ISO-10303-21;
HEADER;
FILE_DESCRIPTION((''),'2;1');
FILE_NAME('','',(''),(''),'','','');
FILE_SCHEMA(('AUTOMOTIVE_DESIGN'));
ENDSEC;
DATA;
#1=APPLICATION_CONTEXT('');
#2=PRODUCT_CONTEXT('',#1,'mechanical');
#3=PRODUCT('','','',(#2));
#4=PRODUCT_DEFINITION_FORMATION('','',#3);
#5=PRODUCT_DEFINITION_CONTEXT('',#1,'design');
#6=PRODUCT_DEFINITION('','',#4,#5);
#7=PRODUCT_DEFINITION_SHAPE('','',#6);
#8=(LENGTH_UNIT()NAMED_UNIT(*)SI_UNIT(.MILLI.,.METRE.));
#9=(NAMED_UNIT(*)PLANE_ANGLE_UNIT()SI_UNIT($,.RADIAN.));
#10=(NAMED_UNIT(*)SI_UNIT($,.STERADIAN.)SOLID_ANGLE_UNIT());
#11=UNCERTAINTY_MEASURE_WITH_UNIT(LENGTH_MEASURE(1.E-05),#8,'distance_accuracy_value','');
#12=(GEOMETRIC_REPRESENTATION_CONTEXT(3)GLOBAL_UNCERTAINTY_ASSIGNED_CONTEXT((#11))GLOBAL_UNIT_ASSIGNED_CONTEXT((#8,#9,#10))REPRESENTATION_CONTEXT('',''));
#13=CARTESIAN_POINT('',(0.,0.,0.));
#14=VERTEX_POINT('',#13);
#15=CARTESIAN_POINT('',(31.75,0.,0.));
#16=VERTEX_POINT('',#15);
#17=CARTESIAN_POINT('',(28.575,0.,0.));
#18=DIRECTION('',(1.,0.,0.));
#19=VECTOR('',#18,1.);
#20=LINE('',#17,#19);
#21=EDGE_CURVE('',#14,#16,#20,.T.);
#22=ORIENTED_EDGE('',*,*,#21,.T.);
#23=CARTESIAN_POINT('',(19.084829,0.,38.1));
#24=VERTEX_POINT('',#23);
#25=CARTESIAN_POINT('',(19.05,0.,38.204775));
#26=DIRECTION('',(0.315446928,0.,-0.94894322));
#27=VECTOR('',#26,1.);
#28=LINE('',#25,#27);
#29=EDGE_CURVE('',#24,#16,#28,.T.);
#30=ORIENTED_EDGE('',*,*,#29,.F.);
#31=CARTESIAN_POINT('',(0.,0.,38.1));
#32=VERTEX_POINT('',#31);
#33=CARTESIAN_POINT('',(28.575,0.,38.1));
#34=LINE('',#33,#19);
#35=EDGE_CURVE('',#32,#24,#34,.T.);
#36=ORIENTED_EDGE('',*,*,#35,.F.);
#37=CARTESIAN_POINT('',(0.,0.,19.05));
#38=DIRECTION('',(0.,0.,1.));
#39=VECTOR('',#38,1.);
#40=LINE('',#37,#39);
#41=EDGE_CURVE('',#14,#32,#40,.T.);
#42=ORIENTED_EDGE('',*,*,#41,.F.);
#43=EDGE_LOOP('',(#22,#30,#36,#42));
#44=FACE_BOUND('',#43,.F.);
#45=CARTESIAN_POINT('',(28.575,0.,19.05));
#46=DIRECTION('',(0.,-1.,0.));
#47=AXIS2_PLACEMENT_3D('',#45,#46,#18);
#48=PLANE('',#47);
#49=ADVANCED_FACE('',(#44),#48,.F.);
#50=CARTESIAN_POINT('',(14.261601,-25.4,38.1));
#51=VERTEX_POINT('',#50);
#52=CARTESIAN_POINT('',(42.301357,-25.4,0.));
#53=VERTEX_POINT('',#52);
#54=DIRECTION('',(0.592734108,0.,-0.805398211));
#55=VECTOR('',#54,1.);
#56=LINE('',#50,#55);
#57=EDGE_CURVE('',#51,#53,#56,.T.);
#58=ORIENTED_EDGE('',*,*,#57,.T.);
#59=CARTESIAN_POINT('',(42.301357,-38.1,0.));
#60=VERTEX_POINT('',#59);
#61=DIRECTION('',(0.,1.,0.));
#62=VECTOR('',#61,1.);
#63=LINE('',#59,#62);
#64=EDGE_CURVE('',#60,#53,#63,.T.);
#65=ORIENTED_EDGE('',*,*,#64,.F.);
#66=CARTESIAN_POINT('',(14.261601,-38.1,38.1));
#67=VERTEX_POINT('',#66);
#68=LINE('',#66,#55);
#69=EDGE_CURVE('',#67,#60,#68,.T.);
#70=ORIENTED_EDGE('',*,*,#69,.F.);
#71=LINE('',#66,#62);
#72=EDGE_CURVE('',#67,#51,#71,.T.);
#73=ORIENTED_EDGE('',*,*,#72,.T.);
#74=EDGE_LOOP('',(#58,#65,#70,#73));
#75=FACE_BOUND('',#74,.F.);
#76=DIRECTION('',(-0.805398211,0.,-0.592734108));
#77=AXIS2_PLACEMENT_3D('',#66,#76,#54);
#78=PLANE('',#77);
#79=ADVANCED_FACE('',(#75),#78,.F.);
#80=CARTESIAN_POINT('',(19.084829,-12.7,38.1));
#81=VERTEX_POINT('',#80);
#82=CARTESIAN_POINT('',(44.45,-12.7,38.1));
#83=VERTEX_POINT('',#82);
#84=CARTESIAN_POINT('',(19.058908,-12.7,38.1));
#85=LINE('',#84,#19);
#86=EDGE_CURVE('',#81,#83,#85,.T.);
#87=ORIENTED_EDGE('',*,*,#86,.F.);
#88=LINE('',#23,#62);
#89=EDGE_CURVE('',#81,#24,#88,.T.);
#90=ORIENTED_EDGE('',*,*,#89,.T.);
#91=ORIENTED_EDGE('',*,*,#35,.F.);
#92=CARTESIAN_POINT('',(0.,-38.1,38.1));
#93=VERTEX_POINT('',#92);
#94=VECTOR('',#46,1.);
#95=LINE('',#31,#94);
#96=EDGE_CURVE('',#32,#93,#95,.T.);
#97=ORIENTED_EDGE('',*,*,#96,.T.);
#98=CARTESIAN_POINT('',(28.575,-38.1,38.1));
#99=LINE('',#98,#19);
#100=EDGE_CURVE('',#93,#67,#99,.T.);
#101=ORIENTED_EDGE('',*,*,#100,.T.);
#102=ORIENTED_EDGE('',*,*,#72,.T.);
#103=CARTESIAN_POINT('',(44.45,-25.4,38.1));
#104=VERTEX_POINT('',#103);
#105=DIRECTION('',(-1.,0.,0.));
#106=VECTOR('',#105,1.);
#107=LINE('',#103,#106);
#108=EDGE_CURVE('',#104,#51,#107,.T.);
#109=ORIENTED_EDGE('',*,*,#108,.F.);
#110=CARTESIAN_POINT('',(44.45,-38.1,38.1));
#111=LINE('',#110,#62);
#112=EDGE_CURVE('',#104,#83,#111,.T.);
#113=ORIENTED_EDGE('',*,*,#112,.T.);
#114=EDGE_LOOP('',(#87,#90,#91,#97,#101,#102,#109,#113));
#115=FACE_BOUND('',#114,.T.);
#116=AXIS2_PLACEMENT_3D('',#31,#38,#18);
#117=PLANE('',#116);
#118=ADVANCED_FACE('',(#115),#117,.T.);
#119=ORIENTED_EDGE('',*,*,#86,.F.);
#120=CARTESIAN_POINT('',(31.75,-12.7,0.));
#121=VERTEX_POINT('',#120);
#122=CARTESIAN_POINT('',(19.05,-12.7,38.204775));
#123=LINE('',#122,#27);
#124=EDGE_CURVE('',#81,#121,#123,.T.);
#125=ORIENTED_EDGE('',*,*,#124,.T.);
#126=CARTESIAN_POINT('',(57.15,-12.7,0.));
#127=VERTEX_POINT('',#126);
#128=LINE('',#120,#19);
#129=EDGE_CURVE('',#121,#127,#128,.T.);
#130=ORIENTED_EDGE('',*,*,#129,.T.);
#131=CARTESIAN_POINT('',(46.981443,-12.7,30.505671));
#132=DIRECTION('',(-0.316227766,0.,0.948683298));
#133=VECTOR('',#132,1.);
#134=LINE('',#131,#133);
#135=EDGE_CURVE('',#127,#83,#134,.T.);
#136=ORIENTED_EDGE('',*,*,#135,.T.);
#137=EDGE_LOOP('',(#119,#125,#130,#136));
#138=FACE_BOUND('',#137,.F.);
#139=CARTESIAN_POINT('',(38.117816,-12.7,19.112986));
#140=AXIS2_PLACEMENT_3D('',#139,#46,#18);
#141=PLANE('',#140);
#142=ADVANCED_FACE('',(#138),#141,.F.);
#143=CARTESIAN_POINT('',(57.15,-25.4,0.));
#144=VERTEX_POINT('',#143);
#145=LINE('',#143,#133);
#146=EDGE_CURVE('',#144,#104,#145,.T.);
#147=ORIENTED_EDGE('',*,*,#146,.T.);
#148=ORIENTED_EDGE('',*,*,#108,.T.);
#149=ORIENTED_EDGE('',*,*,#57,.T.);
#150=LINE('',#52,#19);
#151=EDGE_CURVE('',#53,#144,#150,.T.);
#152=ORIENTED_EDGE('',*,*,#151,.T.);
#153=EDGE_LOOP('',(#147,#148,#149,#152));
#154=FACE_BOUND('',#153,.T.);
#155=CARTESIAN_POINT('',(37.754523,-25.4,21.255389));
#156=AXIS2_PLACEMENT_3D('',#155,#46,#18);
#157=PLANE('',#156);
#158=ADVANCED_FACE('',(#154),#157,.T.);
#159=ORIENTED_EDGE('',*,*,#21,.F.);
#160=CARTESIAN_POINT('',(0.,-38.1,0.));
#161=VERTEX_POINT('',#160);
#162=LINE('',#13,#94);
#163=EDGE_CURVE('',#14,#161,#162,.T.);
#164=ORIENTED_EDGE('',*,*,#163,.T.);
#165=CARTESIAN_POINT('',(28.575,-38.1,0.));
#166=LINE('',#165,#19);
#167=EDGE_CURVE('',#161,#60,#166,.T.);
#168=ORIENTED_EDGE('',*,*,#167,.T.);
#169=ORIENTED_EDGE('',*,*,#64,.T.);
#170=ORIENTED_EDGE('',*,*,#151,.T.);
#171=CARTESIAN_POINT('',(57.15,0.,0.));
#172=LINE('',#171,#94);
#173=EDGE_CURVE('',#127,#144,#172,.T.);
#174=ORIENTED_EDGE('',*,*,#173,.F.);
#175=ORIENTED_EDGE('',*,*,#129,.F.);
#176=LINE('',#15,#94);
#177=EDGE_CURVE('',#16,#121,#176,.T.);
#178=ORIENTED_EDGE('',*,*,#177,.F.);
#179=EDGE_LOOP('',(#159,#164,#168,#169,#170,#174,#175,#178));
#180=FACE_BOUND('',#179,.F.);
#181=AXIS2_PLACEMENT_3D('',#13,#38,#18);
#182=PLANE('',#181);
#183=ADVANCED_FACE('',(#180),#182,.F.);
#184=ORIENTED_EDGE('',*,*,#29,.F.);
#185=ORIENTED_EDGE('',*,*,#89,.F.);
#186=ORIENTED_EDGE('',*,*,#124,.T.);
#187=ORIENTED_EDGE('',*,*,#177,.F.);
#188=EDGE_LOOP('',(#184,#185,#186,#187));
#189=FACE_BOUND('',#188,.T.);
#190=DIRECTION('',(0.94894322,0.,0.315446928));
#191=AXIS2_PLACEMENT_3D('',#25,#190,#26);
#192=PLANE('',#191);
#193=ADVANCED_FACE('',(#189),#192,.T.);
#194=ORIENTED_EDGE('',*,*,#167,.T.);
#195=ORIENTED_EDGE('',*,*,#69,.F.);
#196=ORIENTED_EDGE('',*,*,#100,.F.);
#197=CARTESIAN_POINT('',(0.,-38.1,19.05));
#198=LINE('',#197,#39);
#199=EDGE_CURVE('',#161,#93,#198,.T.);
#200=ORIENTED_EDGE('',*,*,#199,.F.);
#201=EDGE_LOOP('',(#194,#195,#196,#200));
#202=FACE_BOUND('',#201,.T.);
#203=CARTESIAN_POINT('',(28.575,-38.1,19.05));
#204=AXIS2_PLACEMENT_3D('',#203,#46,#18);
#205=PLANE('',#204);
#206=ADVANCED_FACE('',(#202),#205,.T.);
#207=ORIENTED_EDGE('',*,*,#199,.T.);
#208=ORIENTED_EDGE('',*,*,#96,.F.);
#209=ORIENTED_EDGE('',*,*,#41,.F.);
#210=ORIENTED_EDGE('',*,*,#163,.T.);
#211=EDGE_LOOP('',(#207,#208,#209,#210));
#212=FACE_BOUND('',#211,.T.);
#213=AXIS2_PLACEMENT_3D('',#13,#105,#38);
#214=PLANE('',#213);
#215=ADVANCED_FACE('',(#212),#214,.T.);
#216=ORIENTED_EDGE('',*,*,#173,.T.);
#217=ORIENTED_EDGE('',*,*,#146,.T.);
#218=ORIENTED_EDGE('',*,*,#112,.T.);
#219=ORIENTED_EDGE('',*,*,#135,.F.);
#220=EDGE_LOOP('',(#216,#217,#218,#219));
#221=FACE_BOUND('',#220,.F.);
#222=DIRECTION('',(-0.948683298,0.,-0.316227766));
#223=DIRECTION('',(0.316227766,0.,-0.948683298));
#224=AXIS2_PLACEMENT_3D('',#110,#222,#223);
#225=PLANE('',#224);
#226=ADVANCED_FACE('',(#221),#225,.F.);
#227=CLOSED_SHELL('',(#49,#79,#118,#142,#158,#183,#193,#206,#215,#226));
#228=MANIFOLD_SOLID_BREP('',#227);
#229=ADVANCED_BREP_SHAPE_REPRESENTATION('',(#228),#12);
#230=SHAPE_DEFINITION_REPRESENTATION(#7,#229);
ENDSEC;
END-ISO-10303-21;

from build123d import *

# Parameters (mm, degrees)
F0_W     = 57.15
F0_H     = 38.1
F1_DEPTH = 38.1
F3_DEPTH = 38.1
F5_DEPTH = 12.7
F9_DEPTH = 12.7


# Not quite as in the source:
# - a feature of the source that left no trace in its solid (it failed there, or was rolled back) is left out
# - a feature names something its author has since deleted; it is built from what else it names


with BuildPart() as f1:
    # F0 (on Front) → F1 (new body)
    with BuildSketch(Plane.XZ):
        with Locations((28.575, 19.05)):
            Rectangle(F0_W, F0_H)
    extrude(amount=F1_DEPTH)

    # F2 (on face) → F3 (cut)
    with BuildSketch(Plane.XZ.offset(38.1)):
        Polygon((57.15, 38.1), (44.45, 38.1), (57.15, 0), align=None)
    extrude(amount=-F3_DEPTH, mode=Mode.SUBTRACT)

    # F4 (on Front) → F5 (cut)
    with BuildSketch(Plane.XZ):
        Polygon((44.4645239406, 38.2572661593), (19.05, 38.2047749953), (31.75, 0), (57.1819730103, 0), align=None)
    extrude(amount=F5_DEPTH, mode=Mode.SUBTRACT)

    # F7 (on face) → F9 (cut)
    with BuildSketch(Plane.XZ.offset(38.1)):
        Polygon((44.45, 38.1), (14.2616005614, 38.1), (42.3013567924, 0), (57.15, 0), align=None)
    extrude(amount=-F9_DEPTH, mode=Mode.SUBTRACT)


solid = f1.part
